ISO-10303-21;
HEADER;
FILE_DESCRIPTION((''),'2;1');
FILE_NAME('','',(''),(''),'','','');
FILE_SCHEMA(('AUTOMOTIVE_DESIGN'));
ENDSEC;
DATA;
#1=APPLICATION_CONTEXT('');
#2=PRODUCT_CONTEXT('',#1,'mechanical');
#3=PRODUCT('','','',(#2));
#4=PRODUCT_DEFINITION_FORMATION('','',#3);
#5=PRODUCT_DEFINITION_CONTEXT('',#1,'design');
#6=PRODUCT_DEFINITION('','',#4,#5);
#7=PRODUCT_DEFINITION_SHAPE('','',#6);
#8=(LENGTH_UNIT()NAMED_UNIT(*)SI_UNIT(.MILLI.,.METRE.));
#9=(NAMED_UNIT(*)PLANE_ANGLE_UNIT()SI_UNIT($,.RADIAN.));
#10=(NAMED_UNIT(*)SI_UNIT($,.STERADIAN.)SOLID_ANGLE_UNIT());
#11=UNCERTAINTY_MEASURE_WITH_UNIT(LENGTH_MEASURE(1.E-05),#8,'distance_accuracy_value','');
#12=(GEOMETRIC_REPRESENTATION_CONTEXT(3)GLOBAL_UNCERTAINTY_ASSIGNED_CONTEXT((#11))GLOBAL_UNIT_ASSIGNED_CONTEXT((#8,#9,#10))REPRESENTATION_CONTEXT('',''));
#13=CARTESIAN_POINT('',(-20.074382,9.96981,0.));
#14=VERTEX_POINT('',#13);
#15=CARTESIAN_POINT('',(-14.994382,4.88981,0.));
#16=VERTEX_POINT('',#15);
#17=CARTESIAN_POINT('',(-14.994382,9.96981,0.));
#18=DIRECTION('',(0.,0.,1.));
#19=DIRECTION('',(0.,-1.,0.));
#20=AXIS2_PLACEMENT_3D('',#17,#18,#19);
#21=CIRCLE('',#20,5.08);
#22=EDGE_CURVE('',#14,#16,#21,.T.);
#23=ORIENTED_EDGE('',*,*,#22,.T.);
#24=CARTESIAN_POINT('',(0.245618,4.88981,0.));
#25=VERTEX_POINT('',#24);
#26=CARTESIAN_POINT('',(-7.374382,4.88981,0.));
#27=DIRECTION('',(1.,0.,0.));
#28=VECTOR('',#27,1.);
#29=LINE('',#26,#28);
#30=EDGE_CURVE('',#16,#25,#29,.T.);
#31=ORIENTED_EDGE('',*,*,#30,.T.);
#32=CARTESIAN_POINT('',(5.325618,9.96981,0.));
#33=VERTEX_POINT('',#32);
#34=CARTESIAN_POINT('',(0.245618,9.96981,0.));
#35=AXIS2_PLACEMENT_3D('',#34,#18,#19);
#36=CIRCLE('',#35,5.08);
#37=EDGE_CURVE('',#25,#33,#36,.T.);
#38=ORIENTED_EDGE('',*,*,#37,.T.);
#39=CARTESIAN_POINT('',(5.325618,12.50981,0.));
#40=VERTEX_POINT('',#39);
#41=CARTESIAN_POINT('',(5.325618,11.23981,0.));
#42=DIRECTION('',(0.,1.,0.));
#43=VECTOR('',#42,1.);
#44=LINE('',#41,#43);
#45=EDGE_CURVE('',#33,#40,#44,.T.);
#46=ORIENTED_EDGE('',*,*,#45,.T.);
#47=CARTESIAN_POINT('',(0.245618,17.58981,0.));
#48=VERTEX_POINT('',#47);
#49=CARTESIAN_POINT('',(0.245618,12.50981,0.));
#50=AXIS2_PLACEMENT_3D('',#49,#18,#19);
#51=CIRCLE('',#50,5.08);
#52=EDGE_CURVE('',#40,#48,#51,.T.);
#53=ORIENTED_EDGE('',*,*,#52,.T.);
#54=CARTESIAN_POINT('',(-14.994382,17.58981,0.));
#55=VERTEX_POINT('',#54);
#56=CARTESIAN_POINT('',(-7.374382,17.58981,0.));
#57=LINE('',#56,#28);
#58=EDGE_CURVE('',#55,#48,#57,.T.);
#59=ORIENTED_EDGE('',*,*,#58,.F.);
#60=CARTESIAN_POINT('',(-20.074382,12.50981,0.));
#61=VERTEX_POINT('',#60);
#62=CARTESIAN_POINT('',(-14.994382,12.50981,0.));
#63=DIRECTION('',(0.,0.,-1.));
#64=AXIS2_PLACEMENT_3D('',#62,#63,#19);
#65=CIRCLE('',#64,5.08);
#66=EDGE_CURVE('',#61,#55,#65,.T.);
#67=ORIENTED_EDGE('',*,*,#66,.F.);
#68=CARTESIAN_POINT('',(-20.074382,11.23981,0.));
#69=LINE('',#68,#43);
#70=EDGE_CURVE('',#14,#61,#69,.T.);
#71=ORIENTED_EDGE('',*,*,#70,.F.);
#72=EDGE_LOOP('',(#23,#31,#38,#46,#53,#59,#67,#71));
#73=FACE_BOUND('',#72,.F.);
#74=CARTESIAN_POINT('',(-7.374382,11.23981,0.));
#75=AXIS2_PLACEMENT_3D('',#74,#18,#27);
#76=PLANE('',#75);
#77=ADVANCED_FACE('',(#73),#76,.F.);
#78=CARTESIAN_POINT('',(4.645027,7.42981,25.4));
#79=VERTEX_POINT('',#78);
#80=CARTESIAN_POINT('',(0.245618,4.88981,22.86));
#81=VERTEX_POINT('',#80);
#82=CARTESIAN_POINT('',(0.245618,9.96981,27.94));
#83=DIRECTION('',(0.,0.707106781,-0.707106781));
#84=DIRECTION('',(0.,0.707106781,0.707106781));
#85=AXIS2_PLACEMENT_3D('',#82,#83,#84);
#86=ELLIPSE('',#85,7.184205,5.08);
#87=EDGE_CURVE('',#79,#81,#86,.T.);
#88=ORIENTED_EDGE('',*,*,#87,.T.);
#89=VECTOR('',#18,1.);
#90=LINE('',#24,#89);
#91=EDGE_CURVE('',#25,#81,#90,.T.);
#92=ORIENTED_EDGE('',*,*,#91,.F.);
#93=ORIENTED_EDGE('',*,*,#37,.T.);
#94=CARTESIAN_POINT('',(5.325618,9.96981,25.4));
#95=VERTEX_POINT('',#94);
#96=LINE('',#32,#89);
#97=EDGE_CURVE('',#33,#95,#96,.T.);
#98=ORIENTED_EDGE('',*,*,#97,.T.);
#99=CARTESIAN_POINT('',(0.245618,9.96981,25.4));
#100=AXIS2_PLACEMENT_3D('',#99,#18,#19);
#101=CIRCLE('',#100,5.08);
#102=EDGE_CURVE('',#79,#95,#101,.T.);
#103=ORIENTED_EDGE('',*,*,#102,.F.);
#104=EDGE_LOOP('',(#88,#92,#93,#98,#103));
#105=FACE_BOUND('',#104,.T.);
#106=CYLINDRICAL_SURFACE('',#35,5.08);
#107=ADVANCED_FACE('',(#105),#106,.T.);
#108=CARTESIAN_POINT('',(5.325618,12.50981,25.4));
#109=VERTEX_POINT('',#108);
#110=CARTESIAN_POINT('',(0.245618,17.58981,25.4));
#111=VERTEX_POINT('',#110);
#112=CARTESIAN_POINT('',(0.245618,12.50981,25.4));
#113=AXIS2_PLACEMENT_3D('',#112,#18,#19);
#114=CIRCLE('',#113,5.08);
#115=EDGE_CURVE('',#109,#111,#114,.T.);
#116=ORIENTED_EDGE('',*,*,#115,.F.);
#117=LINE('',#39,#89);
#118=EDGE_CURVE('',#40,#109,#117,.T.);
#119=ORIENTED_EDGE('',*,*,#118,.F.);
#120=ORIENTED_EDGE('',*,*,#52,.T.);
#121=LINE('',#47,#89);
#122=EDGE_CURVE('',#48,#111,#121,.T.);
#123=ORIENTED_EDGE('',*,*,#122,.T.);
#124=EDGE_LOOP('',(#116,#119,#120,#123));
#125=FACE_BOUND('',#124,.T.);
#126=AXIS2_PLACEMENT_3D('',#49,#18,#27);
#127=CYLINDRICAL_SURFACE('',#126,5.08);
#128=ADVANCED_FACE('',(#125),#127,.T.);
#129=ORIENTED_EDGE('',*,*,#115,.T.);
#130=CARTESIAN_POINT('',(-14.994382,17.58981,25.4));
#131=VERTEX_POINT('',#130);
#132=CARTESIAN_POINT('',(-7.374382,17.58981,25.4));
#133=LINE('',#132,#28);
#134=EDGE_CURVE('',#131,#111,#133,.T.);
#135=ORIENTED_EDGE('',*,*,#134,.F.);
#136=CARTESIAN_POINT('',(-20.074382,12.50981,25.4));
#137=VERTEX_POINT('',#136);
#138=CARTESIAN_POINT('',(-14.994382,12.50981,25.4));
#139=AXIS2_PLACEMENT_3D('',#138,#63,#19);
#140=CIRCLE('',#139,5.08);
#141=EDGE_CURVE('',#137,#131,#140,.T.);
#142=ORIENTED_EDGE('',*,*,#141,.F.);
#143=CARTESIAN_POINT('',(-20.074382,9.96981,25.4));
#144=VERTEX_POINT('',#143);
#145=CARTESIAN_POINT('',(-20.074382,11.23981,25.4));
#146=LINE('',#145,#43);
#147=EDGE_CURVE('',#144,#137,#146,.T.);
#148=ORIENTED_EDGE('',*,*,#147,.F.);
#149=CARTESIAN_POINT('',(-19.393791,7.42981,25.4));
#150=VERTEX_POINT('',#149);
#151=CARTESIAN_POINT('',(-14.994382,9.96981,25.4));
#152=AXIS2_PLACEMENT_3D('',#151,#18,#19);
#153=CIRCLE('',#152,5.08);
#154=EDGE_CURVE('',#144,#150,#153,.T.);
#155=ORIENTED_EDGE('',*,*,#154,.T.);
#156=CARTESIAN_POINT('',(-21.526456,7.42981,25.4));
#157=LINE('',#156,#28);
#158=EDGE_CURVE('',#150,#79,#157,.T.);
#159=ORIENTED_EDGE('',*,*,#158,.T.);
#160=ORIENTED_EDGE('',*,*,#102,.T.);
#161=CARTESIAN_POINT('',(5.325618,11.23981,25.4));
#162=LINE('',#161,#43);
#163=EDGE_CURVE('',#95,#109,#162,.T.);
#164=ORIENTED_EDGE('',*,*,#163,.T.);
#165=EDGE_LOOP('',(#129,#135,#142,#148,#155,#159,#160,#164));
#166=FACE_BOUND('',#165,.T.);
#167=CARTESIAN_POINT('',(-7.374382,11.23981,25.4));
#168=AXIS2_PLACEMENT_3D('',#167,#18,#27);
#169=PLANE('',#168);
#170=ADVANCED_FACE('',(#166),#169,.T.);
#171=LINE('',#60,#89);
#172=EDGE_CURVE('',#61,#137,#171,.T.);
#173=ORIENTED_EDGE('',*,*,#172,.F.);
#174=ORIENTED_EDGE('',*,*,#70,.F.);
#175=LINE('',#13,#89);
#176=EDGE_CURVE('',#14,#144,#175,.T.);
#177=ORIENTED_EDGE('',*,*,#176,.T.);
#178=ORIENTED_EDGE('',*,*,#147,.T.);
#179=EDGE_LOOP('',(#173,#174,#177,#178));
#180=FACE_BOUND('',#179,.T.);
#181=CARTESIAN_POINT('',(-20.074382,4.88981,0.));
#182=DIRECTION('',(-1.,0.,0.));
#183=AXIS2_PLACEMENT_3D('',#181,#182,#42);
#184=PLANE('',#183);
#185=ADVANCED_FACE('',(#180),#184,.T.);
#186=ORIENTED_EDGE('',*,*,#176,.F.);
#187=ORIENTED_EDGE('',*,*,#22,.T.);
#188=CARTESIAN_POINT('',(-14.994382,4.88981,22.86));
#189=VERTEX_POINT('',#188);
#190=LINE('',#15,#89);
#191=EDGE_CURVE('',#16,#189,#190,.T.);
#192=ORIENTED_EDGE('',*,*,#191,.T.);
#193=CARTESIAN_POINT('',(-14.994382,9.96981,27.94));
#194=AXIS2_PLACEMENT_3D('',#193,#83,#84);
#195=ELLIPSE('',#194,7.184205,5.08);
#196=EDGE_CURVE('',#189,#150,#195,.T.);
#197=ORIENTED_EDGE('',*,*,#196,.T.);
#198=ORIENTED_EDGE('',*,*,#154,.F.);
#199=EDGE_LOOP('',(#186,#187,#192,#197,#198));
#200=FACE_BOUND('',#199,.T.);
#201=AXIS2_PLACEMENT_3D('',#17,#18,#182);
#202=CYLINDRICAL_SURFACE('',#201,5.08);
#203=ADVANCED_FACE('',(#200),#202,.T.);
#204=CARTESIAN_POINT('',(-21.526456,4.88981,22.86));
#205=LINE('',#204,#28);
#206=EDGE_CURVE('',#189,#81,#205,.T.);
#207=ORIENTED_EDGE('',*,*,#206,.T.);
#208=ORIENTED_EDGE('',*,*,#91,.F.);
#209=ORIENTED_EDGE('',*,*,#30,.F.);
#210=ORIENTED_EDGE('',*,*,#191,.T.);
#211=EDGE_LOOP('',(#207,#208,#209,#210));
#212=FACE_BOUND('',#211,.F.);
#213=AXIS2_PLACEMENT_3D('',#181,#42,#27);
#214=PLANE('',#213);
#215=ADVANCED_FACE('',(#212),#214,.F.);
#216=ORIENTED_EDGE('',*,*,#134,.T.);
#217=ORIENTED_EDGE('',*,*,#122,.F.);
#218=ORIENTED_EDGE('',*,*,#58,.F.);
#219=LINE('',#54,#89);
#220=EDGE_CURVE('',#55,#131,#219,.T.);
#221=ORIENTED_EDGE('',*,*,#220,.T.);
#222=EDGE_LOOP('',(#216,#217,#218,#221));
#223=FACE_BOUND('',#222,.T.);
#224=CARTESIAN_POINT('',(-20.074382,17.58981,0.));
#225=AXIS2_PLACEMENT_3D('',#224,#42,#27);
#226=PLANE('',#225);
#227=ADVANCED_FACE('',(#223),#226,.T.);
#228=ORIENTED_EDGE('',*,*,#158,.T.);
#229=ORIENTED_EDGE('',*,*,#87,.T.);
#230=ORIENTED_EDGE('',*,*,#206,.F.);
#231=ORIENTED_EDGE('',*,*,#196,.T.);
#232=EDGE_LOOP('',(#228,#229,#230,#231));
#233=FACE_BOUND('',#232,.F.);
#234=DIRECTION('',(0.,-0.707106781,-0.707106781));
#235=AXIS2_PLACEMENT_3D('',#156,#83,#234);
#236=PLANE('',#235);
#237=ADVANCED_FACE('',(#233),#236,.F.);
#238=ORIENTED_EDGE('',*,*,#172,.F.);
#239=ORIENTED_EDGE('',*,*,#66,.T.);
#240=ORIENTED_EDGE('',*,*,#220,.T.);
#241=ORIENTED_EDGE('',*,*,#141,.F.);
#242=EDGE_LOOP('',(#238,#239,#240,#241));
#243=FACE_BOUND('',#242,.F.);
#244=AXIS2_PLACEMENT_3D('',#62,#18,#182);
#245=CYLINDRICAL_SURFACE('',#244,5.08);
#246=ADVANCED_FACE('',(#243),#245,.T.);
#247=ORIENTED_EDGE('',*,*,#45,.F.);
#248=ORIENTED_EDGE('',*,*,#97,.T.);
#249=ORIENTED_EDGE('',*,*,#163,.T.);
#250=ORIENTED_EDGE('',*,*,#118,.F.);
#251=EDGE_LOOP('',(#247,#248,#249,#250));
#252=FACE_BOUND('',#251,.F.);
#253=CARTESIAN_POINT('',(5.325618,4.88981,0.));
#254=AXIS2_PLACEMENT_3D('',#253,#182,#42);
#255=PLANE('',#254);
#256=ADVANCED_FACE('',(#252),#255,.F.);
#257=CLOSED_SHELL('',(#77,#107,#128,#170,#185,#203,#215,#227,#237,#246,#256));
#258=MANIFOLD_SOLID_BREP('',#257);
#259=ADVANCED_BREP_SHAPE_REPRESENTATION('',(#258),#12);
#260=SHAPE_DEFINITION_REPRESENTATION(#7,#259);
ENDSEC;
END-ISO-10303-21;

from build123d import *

# Parameters (mm, degrees)
F0_W        = 25.4
F0_H        = 12.7
F1_DEPTH    = 25.4
F2_R        = 5.08
F3_T1_DEPTH = 28.3041495789


# Not quite as in the source:
# - a fillet or chamfer that OpenCascade refuses, or shapes differently, is made with other operations: its cross-section is extruded or revolved along the edge and cut away or added


with BuildPart() as f1:
    # F0 (on Top) → F1 (new body)
    with BuildSketch(Plane.XY):
        with Locations((-7.3743816465, 11.2398102205)):
            Rectangle(F0_W, F0_H)
    extrude(amount=F1_DEPTH)

    # F2
    f2_edges = [f1.edges().sort_by_distance(p)[0] for p in [
        (5.325618, 4.88981, 12.7),
        (5.325618, 17.58981, 12.7),
        (-20.074382, 17.58981, 12.7),
        (-20.074382, 4.88981, 12.7),
    ]]
    fillet(f2_edges, radius=F2_R)

    # F3: chamfer of 2.54 on 1 edges, made by hand

    # F3_s2 → F3_t1 (cut)
    with BuildSketch(Plane.YZ.offset(-21.5264564359)):
        Polygon((7.4298102205, 25.4), (4.8898102205, 22.86), (4.8898102205, 25.4), align=None)
    extrude(amount=F3_T1_DEPTH, mode=Mode.SUBTRACT)


solid = f1.part
